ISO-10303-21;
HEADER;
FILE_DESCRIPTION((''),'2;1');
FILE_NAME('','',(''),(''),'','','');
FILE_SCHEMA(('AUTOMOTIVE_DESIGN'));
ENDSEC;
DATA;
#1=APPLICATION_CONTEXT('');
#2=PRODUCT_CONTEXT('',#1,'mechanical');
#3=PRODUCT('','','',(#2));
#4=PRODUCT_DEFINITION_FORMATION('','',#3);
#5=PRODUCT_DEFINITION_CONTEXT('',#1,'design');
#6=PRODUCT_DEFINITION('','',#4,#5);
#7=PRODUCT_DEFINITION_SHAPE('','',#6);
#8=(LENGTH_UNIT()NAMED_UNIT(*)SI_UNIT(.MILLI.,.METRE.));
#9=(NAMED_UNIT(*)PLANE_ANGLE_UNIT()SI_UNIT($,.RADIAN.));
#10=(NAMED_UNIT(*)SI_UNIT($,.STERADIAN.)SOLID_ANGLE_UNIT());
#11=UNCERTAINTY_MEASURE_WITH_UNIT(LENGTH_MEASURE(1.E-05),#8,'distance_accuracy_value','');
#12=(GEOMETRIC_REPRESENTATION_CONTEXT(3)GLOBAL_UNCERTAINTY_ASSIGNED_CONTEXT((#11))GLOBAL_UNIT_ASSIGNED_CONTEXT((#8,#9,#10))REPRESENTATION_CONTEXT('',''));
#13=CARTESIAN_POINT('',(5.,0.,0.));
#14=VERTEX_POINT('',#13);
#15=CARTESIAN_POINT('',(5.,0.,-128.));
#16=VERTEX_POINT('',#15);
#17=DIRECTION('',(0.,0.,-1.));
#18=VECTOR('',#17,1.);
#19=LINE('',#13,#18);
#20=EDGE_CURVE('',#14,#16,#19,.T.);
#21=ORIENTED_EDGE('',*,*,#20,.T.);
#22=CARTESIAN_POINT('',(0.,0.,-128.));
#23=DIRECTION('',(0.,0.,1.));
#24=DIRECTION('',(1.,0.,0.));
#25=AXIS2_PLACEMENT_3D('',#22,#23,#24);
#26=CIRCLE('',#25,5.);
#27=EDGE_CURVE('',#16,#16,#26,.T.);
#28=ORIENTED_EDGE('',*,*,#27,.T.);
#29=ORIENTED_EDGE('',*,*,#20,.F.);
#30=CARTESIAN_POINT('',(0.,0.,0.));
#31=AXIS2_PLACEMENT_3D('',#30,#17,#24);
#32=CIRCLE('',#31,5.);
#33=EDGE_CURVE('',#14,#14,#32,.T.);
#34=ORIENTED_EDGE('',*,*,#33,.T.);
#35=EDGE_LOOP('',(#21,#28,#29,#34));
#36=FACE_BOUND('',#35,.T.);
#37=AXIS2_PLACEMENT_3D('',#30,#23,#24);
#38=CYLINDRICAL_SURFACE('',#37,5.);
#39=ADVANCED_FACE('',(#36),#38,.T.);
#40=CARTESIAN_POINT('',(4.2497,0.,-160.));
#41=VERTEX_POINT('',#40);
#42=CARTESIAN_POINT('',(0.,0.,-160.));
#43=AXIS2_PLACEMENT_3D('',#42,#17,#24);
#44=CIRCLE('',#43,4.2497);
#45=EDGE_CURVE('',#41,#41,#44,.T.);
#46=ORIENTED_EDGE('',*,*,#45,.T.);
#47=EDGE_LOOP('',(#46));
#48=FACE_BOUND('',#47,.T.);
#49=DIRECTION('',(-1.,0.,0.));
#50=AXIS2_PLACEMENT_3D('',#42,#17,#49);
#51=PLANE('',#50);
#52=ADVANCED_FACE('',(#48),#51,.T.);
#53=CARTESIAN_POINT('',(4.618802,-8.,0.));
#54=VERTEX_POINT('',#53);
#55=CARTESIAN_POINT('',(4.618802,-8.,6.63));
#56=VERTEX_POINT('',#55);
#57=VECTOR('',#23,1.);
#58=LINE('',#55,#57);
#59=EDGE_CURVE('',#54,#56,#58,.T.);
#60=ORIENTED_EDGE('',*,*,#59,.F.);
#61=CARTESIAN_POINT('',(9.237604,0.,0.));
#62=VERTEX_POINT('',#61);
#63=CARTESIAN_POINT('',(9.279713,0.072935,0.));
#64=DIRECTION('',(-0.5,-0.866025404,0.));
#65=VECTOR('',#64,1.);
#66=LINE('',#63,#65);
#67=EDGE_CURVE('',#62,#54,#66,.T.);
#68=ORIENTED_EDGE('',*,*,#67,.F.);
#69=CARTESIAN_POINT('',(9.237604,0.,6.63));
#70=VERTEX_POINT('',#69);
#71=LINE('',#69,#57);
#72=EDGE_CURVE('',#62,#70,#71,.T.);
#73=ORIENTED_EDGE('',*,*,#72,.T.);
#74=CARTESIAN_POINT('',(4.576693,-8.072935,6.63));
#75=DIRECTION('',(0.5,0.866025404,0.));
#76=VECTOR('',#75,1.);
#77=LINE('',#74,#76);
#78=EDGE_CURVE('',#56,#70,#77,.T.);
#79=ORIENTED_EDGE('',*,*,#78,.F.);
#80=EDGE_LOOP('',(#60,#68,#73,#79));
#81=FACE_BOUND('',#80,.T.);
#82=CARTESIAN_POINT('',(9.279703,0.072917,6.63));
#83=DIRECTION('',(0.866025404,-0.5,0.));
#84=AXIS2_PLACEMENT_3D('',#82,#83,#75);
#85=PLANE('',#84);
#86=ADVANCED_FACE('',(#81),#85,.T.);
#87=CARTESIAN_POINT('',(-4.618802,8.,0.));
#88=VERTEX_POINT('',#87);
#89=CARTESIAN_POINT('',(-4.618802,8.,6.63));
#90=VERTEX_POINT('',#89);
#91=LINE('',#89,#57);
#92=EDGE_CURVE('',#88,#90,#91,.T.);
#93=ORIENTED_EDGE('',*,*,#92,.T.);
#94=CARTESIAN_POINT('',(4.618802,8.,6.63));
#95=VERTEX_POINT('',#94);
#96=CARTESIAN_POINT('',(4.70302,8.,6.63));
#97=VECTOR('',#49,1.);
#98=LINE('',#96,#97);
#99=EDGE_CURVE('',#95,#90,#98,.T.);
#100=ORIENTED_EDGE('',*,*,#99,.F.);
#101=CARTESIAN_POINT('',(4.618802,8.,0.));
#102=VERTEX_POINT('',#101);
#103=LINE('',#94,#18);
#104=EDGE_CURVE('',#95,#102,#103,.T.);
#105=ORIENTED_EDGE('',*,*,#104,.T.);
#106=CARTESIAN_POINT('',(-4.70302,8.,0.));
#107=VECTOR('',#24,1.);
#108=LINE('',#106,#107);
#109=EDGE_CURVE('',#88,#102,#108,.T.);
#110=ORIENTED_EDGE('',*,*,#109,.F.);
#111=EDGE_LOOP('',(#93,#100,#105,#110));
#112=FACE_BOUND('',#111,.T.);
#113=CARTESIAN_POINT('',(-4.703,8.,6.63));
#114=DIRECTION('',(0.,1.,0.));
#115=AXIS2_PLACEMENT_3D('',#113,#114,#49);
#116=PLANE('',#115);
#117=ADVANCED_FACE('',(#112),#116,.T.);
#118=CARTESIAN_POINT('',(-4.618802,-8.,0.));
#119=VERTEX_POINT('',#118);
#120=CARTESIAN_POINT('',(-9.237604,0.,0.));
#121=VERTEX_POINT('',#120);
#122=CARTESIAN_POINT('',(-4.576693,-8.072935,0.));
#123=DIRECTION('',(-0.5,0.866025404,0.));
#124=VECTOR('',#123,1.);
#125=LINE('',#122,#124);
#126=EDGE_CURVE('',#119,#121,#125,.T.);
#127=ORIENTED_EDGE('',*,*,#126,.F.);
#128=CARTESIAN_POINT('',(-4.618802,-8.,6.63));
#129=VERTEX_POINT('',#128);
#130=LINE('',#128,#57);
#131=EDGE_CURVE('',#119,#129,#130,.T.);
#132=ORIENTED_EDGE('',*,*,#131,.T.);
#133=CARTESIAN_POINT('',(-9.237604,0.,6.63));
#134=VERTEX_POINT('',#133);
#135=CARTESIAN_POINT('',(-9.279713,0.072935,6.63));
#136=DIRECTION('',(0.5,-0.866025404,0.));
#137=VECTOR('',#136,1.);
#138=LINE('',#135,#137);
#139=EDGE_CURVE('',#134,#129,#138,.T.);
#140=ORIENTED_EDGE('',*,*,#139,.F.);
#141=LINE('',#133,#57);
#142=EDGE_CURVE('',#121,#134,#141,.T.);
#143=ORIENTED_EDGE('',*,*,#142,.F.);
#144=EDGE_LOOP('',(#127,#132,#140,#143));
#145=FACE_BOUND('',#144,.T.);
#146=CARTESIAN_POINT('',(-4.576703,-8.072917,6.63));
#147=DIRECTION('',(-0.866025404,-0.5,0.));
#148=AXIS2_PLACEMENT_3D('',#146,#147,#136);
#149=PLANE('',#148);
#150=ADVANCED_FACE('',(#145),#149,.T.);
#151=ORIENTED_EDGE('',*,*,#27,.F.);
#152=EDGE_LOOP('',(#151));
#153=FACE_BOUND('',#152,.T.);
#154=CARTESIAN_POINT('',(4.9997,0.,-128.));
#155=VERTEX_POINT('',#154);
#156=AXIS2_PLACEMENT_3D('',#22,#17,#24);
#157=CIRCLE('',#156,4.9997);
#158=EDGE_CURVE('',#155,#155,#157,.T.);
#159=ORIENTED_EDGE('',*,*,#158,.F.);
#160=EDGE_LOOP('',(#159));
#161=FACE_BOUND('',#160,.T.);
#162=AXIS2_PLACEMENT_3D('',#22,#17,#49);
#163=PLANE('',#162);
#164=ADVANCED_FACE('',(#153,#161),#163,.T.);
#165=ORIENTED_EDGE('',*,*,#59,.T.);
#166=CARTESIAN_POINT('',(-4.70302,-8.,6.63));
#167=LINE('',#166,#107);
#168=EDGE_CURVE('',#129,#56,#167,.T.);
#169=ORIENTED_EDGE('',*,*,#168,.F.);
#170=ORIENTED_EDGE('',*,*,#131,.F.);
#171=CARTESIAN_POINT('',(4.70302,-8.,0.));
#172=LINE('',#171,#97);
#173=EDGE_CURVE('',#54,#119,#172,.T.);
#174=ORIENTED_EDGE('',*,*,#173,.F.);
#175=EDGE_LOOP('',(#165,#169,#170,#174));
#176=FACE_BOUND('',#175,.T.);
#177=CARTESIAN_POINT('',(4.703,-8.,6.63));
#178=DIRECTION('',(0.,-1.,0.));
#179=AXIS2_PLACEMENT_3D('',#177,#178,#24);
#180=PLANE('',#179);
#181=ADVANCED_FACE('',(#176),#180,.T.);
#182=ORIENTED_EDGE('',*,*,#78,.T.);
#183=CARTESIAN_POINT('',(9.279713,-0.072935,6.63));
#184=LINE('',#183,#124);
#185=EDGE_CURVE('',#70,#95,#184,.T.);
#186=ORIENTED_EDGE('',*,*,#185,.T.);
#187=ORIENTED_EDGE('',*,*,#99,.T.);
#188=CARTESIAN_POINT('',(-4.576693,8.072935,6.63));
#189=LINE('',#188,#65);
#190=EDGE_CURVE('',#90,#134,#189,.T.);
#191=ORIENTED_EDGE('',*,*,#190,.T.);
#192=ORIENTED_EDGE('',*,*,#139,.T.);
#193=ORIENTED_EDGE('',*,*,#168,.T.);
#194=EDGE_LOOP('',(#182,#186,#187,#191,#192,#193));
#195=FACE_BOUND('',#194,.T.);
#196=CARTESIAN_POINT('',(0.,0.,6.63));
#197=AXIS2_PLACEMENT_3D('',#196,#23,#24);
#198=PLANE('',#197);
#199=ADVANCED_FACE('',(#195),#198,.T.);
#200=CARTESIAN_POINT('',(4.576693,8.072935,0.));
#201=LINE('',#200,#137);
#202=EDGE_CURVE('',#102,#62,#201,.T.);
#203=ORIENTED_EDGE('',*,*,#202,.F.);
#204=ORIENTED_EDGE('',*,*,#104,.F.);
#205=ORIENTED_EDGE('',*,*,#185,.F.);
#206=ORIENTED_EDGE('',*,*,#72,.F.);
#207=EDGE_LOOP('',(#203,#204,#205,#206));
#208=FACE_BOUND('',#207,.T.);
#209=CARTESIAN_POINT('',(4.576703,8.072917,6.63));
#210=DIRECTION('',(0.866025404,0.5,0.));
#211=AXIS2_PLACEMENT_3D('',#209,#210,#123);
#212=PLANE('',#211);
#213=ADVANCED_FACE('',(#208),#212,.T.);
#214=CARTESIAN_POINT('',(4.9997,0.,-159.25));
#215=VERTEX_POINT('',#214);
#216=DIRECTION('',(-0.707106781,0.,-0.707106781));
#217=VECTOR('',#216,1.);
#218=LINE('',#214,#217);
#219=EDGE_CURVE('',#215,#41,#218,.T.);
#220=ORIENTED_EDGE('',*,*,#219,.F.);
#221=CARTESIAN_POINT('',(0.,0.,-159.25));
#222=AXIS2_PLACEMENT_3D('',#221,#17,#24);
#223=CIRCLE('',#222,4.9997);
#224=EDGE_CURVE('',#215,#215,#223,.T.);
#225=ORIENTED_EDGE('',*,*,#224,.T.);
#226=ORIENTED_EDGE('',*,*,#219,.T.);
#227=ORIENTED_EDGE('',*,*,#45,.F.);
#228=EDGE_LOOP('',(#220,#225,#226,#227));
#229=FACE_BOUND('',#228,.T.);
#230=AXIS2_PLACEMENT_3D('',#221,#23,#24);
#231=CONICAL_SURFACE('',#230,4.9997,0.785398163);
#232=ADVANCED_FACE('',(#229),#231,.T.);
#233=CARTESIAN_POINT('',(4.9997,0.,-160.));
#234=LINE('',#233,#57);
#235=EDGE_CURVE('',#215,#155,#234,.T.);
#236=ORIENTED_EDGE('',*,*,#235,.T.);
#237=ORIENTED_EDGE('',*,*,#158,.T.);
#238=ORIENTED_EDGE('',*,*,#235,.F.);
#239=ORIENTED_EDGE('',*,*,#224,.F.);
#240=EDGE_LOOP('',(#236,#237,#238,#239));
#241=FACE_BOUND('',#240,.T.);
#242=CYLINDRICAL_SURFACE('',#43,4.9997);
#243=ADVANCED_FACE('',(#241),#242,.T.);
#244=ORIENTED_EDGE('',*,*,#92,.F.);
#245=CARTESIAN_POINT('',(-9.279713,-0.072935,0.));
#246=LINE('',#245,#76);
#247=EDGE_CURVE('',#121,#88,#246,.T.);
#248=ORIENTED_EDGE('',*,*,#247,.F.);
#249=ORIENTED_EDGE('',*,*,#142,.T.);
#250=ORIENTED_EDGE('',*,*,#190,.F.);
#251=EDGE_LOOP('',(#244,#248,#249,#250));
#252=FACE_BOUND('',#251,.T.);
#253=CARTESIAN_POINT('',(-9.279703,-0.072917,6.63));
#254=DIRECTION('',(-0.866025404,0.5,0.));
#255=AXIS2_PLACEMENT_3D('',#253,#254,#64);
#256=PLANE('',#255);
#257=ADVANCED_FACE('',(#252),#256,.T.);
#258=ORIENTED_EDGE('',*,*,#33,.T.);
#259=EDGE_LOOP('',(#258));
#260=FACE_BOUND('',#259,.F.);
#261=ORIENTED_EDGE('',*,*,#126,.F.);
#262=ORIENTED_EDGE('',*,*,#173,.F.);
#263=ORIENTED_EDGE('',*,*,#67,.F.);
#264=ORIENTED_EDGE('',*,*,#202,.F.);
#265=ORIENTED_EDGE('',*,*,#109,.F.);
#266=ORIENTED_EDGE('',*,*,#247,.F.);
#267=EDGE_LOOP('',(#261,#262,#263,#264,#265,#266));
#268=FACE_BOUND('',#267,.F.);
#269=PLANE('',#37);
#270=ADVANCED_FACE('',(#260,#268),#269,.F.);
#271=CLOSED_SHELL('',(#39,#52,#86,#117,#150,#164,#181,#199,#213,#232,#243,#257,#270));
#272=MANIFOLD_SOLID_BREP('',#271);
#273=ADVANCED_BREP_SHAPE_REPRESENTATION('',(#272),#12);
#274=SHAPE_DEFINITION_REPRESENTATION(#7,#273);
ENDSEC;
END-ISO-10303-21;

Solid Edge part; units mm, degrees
sketch "Sketch1" plane through (0, 0, 0) normal (0, 0, 1) x (1, 0, 0)
  circle A0 centre (0, 0) radius 9.28
  dimension "D1" = 18.56
extrude "Protrusion1" add sketch "Sketch1" along normal blind 6.63
sketch "Sketch2" plane through (0, 0, 0) normal (0, 0, -1) x (1, 0, 0)
  circle A0 centre (0, 0) radius 5
extrude "Protrusion2" add sketch "Sketch2" along normal blind 160
sketch "Sketch3" plane through (0, 0, -160) normal (0, 0, -1) x (1, 0, 0)
  circle A0 centre (0, 0) radius 4.9997
extrude "Cutout1" cut sketch "Sketch3" against normal blind 32 flip side to cut
chamfer "Chamfer_1" distance 0.75 angle 45 1 edges at (-4.9997, 0, -160)
sketch "Sketch4" plane through (0, 0, 6.63) normal (0, 0, 1) x (1, 0, 0)
  line L0 (-4.703, 8) -> (4.703, 8)
  dimension "D1" = 16
extrude "Cutout2" cut sketch "Sketch4" against normal up to next material side at (0, 8.05, 6.63)
pattern_circular "Pattern1" count 6 over 360 about axis through (0, 0, 6.63) along (0, 0, 1) of "Cutout2"
properties part number "119175"
